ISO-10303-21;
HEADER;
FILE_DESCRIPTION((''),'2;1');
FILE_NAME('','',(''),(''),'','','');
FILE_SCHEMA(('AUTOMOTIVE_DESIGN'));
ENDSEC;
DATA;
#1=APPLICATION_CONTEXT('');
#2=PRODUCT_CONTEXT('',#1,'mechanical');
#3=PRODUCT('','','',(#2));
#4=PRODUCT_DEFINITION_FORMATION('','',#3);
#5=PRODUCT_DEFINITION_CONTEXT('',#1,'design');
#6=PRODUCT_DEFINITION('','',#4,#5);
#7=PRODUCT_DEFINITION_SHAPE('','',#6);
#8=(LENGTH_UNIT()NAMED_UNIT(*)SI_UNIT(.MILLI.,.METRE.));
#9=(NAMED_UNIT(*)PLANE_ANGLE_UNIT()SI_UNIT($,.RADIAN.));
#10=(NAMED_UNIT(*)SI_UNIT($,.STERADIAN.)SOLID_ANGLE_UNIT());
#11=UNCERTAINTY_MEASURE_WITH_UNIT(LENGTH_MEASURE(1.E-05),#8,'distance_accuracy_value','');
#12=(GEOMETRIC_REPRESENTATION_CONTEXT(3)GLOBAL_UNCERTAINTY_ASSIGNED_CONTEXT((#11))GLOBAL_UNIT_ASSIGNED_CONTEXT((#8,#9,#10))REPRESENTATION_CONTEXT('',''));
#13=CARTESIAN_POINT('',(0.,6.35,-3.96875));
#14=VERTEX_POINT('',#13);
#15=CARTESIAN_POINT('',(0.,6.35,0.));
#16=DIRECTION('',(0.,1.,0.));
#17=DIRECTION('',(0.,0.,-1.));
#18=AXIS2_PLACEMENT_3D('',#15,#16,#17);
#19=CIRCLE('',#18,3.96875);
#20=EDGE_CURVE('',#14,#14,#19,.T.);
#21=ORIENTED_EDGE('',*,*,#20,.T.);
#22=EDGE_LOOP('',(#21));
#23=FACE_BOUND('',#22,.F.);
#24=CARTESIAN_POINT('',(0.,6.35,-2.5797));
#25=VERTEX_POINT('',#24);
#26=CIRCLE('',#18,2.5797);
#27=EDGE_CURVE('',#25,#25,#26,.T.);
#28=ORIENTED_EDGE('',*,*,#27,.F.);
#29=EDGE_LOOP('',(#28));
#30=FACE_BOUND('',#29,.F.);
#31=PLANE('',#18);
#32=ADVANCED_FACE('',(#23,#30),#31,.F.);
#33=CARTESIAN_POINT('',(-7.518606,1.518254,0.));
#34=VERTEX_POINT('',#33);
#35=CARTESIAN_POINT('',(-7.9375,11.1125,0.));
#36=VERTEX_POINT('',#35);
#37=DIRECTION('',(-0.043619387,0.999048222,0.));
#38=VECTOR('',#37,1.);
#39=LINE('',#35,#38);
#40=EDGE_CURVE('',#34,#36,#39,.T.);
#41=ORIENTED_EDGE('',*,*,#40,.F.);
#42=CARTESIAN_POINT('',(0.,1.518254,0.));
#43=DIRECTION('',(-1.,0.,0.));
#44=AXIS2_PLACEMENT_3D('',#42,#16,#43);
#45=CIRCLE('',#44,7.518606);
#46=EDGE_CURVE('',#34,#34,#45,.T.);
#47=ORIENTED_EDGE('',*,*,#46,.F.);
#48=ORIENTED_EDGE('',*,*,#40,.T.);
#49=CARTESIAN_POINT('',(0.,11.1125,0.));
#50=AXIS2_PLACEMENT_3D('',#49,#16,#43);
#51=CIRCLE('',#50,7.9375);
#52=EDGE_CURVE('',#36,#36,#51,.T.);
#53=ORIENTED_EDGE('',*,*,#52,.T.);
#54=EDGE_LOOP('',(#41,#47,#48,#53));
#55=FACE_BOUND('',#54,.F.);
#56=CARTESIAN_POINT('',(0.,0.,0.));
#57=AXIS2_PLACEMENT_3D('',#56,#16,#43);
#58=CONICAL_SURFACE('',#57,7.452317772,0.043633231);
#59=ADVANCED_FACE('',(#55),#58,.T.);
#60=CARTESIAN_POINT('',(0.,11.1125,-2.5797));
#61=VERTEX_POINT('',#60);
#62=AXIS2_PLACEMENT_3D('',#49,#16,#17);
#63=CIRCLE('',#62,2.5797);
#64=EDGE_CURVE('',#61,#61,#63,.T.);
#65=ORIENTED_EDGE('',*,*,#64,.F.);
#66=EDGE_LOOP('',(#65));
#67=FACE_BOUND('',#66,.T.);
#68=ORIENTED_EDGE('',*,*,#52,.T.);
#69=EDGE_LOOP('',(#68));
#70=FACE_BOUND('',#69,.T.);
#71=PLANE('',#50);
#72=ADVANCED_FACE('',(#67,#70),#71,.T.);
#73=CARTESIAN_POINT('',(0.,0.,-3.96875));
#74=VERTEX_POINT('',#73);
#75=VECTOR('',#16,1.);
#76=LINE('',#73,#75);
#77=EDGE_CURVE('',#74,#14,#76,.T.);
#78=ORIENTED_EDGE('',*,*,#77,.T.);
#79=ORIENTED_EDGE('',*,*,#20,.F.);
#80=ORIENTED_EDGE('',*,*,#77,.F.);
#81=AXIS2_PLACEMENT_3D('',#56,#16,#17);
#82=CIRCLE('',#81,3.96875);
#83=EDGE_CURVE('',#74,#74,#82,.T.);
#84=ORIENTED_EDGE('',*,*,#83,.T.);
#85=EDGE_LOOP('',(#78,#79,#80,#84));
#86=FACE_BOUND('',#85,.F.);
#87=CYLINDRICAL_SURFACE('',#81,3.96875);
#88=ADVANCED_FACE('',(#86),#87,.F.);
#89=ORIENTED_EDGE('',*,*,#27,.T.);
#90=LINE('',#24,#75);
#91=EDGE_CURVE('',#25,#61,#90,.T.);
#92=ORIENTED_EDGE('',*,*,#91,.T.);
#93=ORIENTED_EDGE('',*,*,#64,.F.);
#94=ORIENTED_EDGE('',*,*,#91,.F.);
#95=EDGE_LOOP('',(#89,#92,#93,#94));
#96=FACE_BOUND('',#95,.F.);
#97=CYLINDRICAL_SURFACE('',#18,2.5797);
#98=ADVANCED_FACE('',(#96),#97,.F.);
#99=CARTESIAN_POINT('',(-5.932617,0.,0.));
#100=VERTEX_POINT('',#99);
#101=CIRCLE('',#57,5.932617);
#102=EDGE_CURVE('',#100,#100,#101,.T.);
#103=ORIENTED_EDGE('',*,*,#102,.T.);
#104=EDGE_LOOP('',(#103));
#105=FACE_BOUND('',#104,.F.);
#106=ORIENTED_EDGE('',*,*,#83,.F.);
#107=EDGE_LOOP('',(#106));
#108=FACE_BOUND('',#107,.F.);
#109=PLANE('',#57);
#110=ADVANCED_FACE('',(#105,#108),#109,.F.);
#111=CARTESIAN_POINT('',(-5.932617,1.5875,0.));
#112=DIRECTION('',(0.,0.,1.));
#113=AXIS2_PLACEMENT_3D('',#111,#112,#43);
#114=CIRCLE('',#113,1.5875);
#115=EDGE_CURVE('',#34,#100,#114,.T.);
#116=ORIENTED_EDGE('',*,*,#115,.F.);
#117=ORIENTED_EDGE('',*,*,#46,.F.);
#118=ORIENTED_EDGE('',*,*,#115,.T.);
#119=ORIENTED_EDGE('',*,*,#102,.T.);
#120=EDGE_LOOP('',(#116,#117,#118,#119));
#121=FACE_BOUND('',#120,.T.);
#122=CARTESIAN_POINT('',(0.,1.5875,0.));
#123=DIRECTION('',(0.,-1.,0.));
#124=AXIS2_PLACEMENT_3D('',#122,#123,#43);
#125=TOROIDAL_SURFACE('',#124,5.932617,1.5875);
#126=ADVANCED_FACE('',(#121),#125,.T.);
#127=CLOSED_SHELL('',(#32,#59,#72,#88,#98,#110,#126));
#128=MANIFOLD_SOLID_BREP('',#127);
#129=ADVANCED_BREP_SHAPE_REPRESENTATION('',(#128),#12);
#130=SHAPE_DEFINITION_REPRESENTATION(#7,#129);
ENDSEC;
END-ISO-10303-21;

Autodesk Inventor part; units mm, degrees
ref_plane "YZ Plane" through (0, 0, 0) normal (1, 0, 0) x (0, 1, 0)
ref_plane "XZ Plane" through (0, 0, 0) normal (0, 1, 0) x (-1, 0, 0)
ref_plane "XY Plane" through (0, 0, 0) normal (0, 0, 1) x (1, 0, 0)
sketch "Sketch1" plane through (0, 0, 0) normal (0, 1, 0) x (-1, 0, 0)
  circle A0 centre (0, 0) radius 7.9375
  dimension "d0" = 15.875
extrude "Extrusion1" add sketch "Sketch1" along normal blind 11.1125
sketch "Sketch2" plane through (0, 0, 0) normal (0, -1, 0) x (1, 0, 0)
  point P0 (0, 0)
  point P1 (0, 0)
hole "Hole1" at (0, 0, 0) direction (0, 1, 0) diameter 5.1594 end through all counterbore diameter 7.9375 counterbore depth 6.35
draft "FaceDraft1" angle 2.5 pull direction (0, -1, 0) faces at (-7.8347, 7.4083, -1.2733) fixed edges at (7.9375, 11.1125, 0)
fillet "Fillet1" radius 1.5875 1 edges at (7.4523, 0, 0)
properties part number "roundBumper" material "Rubber"
